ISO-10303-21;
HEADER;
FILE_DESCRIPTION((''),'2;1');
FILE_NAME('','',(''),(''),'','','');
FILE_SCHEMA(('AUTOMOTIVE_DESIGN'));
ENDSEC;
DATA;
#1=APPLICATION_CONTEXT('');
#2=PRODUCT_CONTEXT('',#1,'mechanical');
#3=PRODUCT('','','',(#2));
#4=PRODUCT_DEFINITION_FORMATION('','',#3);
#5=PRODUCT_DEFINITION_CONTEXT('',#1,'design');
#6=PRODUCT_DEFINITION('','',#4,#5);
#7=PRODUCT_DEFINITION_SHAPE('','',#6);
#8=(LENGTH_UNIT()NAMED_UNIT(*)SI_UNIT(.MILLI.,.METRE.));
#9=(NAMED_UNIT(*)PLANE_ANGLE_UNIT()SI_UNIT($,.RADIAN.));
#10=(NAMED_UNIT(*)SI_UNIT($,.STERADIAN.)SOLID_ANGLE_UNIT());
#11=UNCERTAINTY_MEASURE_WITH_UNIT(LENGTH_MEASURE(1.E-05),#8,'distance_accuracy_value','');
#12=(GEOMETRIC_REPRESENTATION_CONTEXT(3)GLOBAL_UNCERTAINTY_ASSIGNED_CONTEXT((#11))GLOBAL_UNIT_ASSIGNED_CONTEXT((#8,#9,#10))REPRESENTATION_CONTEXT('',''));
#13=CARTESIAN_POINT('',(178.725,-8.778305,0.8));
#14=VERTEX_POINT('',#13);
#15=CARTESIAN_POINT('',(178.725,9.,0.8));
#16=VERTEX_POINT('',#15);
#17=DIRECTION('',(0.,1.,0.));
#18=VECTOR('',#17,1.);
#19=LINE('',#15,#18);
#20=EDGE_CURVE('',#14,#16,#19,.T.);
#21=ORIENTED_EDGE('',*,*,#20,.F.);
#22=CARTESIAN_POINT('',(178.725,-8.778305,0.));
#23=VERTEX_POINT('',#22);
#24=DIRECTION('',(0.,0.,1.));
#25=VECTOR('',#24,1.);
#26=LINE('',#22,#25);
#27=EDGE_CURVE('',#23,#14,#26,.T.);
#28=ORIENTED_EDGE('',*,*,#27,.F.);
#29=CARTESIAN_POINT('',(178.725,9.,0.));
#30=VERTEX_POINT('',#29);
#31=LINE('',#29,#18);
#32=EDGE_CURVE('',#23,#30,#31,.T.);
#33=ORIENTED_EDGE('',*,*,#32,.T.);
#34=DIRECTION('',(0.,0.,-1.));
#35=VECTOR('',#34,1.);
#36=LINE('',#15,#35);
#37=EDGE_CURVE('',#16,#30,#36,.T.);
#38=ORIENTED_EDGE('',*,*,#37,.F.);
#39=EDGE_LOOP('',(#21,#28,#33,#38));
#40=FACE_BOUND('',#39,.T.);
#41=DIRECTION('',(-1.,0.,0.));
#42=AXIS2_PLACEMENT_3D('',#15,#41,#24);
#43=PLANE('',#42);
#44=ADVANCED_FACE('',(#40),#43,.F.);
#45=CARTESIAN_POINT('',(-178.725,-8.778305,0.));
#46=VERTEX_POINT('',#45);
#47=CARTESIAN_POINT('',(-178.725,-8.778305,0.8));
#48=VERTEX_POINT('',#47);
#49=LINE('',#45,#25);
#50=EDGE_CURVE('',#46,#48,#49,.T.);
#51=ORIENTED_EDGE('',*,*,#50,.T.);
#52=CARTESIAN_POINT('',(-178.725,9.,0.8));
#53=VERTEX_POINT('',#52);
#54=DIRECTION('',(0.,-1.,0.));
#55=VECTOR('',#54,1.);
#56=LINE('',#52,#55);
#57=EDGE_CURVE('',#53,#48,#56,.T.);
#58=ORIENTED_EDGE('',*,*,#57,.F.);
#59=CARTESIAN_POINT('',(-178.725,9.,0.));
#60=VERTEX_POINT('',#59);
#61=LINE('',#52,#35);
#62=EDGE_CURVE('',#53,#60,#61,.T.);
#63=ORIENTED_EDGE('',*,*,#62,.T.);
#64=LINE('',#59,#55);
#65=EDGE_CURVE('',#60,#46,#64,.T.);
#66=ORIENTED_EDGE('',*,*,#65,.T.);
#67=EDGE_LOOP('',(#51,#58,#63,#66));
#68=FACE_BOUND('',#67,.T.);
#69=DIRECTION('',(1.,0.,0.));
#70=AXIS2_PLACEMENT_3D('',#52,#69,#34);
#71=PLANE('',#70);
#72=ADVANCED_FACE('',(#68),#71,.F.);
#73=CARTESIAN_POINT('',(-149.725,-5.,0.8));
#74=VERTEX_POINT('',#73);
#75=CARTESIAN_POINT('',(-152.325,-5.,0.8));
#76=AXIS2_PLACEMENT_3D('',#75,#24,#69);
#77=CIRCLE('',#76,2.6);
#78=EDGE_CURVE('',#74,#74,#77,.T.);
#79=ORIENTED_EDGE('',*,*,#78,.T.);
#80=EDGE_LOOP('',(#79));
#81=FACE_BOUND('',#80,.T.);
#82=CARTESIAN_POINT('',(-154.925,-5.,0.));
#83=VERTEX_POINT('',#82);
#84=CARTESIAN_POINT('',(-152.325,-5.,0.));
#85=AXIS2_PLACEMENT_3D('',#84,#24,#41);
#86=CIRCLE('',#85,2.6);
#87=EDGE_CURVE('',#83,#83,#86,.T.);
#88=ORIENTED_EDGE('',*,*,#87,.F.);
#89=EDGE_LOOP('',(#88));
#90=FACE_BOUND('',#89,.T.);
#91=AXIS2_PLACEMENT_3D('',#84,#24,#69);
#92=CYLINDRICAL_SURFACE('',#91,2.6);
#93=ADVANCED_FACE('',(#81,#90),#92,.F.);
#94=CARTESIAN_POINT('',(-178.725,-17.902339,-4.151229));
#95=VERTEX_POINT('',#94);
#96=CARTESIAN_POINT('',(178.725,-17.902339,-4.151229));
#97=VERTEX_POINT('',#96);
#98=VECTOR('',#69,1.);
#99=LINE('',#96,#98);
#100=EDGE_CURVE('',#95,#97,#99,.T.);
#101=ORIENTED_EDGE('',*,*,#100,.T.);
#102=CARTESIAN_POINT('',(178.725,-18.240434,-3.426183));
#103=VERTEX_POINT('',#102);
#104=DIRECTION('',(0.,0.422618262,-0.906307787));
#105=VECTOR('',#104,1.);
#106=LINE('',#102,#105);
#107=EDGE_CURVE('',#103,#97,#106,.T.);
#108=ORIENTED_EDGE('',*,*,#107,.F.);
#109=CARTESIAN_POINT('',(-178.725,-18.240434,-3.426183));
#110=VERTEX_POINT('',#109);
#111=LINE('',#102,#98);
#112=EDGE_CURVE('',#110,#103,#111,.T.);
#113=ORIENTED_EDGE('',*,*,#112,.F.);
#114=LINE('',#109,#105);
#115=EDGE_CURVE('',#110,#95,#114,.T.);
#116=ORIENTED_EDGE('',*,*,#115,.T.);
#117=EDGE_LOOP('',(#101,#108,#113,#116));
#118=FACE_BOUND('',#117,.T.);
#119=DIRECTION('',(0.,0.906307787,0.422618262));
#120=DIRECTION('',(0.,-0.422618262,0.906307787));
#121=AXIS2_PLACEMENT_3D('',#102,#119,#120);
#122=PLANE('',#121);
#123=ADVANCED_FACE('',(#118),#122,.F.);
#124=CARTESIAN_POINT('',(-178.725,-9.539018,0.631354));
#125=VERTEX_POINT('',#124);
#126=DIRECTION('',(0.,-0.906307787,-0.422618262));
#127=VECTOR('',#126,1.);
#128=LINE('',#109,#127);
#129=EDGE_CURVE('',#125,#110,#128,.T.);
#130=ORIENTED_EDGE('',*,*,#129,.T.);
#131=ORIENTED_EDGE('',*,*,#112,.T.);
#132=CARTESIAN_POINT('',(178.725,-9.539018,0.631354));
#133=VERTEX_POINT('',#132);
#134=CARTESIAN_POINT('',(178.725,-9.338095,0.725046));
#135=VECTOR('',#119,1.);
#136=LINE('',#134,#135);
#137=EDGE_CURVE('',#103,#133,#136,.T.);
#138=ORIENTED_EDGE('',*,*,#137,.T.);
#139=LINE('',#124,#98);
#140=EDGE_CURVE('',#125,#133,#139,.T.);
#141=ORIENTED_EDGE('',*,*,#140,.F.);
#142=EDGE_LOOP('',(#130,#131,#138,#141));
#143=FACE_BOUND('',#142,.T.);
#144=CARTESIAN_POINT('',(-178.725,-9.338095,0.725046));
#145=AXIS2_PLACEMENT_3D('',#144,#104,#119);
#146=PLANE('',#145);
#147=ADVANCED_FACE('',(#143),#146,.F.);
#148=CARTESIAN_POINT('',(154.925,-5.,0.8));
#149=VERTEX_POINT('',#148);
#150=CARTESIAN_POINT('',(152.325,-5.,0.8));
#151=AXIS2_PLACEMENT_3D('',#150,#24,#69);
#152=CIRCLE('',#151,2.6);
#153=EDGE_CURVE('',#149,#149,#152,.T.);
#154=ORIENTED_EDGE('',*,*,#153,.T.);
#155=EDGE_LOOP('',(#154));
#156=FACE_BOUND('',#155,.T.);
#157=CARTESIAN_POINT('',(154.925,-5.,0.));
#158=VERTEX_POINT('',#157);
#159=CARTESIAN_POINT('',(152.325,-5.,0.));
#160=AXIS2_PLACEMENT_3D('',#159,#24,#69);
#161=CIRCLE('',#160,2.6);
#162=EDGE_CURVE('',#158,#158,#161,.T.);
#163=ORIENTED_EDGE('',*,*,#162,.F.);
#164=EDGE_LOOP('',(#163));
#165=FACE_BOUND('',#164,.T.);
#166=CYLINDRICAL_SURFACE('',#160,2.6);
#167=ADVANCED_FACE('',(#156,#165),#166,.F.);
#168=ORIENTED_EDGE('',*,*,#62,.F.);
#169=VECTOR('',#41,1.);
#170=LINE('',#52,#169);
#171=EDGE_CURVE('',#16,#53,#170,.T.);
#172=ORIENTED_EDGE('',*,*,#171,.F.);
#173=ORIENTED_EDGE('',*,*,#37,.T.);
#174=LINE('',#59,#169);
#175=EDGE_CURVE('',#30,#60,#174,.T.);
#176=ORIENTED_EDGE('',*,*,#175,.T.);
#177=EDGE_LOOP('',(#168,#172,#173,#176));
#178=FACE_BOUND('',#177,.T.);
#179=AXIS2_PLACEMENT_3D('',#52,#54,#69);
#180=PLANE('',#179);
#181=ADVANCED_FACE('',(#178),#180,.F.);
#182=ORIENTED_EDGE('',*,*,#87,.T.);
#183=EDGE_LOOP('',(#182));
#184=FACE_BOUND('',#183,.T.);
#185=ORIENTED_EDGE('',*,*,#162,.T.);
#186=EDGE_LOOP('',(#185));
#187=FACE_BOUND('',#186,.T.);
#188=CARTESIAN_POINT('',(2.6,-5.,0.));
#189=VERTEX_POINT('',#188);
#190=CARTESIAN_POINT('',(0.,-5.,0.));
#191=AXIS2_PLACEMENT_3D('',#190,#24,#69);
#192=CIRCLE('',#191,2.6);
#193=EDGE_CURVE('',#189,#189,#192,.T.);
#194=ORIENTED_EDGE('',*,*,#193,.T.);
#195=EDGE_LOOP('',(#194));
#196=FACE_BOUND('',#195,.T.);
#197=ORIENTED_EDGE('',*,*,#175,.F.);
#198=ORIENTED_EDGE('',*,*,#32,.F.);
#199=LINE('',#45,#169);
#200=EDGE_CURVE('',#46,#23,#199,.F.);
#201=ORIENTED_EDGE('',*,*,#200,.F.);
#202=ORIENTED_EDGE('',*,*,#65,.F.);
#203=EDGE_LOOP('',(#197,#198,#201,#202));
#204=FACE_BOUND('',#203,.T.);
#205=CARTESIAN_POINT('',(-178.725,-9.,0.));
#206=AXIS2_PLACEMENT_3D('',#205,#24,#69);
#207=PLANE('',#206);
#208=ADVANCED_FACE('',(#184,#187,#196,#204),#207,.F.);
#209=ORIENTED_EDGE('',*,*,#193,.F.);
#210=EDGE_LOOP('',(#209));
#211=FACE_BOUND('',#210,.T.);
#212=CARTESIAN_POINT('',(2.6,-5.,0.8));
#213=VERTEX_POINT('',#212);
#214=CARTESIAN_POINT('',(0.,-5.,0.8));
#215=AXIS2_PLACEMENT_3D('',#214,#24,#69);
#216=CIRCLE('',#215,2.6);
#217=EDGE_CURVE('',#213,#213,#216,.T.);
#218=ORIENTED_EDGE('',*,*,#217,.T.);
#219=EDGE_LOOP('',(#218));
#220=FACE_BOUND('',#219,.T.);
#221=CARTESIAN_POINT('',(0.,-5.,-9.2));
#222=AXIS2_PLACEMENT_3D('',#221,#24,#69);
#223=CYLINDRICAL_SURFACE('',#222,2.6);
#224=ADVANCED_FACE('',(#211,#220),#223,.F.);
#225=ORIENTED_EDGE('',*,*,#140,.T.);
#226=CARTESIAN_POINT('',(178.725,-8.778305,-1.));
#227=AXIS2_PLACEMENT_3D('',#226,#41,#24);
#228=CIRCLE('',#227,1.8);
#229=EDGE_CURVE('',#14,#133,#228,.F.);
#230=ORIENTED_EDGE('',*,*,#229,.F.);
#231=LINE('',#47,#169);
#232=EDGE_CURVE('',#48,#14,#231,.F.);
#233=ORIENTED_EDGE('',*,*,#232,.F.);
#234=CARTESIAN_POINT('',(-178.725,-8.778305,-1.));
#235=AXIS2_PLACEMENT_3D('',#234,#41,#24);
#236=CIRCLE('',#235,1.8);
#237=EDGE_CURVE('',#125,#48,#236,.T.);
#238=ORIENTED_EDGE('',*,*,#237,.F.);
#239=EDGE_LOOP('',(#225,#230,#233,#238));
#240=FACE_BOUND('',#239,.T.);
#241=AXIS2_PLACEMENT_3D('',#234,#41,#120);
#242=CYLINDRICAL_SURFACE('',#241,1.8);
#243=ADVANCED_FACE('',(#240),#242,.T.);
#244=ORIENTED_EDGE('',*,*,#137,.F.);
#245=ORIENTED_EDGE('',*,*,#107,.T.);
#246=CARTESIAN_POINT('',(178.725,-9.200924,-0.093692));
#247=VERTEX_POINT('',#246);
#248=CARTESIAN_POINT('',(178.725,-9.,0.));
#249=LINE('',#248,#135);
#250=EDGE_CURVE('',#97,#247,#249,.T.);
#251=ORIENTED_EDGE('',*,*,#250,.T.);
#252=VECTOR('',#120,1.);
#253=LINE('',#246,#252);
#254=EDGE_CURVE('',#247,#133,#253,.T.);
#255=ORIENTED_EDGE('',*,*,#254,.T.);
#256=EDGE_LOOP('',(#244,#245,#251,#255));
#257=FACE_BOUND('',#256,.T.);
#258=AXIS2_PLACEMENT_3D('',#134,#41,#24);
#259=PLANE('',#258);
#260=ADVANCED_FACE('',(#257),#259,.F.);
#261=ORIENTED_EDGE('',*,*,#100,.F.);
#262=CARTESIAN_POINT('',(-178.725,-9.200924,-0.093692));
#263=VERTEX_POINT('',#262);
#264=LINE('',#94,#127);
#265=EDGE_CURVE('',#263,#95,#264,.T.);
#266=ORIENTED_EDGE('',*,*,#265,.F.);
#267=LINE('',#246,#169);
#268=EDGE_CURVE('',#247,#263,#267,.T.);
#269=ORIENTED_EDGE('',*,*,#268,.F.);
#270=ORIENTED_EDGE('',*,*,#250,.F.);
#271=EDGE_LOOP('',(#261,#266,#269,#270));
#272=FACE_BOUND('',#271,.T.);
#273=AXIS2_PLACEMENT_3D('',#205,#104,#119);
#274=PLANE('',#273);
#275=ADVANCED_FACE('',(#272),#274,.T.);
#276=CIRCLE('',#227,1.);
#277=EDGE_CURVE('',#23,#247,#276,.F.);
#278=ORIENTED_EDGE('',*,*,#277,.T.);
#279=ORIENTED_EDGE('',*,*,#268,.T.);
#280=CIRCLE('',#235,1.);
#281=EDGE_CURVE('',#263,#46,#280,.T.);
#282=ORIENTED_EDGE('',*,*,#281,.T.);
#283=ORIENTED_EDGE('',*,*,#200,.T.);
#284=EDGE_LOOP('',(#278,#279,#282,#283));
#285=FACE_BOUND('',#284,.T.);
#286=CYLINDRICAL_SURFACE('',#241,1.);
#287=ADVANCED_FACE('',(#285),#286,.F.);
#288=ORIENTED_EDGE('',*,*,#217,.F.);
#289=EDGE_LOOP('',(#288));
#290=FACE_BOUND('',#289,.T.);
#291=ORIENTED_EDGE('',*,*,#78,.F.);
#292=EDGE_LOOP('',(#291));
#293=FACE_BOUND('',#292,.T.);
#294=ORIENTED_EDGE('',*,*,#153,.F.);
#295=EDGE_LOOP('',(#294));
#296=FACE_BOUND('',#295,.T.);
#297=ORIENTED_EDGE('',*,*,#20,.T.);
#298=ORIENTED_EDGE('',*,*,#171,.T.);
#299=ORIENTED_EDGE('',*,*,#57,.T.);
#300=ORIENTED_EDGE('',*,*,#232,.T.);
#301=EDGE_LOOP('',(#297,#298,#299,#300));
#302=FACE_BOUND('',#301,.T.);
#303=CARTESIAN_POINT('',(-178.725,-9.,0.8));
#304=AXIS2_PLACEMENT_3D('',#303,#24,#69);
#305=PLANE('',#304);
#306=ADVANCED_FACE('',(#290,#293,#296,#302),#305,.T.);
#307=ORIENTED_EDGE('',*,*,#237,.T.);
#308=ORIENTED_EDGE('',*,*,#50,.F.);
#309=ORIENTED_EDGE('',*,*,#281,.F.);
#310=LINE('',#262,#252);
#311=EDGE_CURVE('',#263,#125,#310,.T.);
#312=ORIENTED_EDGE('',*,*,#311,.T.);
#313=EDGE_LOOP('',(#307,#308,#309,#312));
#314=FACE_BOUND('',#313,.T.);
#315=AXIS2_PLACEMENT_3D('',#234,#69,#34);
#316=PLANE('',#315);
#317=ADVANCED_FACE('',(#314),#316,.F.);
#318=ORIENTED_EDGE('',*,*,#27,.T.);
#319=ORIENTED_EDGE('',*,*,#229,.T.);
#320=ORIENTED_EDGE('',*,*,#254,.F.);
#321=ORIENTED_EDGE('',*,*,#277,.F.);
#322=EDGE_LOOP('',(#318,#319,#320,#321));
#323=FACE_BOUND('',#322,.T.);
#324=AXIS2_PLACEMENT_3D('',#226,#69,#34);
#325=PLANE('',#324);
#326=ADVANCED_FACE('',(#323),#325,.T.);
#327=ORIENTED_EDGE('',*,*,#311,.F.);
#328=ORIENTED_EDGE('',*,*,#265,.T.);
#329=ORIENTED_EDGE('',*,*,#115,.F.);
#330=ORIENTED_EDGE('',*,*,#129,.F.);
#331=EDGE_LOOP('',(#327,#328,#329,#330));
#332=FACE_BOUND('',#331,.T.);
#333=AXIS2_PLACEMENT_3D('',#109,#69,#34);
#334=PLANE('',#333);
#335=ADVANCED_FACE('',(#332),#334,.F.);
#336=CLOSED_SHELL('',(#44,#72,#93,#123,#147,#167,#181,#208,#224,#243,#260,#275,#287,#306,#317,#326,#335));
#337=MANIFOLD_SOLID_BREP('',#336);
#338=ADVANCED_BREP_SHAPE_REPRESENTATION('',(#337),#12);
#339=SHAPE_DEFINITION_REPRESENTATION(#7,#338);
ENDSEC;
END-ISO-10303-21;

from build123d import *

# Parameters (mm, degrees)
SKETCH_1_W               = 357.45
SKETCH_1_H               = 18
EXTRUDE_1_DEPTH          = 0.8
SKETCH_8_R               = 2.6
CUT_EXTRUDE_1_DEPTH      = 179.953249831
SM_START                 = -178.725
SM_EDGE_FLANGE_1_DEPTH   = 357.45
SM_EDGE_FLANGE_1_2_DEPTH = 357.45
SKETCH_12_R              = 2.6
CUT_EXTRUDE_2_DEPTH      = 10


# Read off the part's stored shape, not the designer's step: Ребро-кромка1
with BuildPart() as part:
    # Sketch 1 → Вытянуть1 (new body)
    with BuildSketch(Plane.XY):
        Rectangle(SKETCH_1_W, SKETCH_1_H)
    extrude(amount=EXTRUDE_1_DEPTH)

    # Эскиз8 → Вырез-Вытянуть1 (cut, through all)
    with BuildSketch(Plane.XY.offset(0.8)):
        with Locations((152.325, -5)):
            Circle(SKETCH_8_R)
        with Locations((-152.325, -5)):
            Circle(SKETCH_8_R)
    extrude(amount=-CUT_EXTRUDE_1_DEPTH, mode=Mode.SUBTRACT)

    # Ребро-кромка1 outline → Ребро-кромка1 (cut)
    with BuildSketch(Plane.YZ.offset(SM_START)):
        with BuildLine():
            Line((-9, 0.8), (-9, 0.786295462))
            ThreePointArc((-9, 0.786295462), (-8.889364261, 0.796570599), (-8.778305337, 0.8))
            Line((-8.778305337, 0.8), (-9, 0.8))
        make_face()
    extrude(amount=SM_EDGE_FLANGE_1_DEPTH, mode=Mode.SUBTRACT)

    # Sm Edge Flange 1 2 outline → Sm Edge Flange 1 2 (add)
    with BuildSketch(Plane.YZ.offset(SM_START)):
        with BuildLine():
            ThreePointArc((-9, 0.786295462), (-9.275580767, 0.729947152), (-9.539018208, 0.631354017))
            Line((-9.539018208, 0.631354017), (-18.2404336, -3.426182617))
            Line((-18.2404336, -3.426182617), (-17.902338991, -4.151228847))
            Line((-17.902338991, -4.151228847), (-9.200923599, -0.093692213))
            ThreePointArc((-9.200923599, -0.093692213), (-8.994744951, -0.023703993), (-8.778305337, 0))
            Line((-8.778305337, 0), (-9, 0))
            Line((-9, 0), (-9, 0.786295462))
        make_face()
    extrude(amount=SM_EDGE_FLANGE_1_2_DEPTH)

    # Эскиз12 → Вырез-Вытянуть2 (cut)
    with BuildSketch(Plane.XY.offset(0.8)):
        with Locations((0, -5)):
            Circle(SKETCH_12_R)
    extrude(amount=-CUT_EXTRUDE_2_DEPTH, mode=Mode.SUBTRACT)


solid = part.part
